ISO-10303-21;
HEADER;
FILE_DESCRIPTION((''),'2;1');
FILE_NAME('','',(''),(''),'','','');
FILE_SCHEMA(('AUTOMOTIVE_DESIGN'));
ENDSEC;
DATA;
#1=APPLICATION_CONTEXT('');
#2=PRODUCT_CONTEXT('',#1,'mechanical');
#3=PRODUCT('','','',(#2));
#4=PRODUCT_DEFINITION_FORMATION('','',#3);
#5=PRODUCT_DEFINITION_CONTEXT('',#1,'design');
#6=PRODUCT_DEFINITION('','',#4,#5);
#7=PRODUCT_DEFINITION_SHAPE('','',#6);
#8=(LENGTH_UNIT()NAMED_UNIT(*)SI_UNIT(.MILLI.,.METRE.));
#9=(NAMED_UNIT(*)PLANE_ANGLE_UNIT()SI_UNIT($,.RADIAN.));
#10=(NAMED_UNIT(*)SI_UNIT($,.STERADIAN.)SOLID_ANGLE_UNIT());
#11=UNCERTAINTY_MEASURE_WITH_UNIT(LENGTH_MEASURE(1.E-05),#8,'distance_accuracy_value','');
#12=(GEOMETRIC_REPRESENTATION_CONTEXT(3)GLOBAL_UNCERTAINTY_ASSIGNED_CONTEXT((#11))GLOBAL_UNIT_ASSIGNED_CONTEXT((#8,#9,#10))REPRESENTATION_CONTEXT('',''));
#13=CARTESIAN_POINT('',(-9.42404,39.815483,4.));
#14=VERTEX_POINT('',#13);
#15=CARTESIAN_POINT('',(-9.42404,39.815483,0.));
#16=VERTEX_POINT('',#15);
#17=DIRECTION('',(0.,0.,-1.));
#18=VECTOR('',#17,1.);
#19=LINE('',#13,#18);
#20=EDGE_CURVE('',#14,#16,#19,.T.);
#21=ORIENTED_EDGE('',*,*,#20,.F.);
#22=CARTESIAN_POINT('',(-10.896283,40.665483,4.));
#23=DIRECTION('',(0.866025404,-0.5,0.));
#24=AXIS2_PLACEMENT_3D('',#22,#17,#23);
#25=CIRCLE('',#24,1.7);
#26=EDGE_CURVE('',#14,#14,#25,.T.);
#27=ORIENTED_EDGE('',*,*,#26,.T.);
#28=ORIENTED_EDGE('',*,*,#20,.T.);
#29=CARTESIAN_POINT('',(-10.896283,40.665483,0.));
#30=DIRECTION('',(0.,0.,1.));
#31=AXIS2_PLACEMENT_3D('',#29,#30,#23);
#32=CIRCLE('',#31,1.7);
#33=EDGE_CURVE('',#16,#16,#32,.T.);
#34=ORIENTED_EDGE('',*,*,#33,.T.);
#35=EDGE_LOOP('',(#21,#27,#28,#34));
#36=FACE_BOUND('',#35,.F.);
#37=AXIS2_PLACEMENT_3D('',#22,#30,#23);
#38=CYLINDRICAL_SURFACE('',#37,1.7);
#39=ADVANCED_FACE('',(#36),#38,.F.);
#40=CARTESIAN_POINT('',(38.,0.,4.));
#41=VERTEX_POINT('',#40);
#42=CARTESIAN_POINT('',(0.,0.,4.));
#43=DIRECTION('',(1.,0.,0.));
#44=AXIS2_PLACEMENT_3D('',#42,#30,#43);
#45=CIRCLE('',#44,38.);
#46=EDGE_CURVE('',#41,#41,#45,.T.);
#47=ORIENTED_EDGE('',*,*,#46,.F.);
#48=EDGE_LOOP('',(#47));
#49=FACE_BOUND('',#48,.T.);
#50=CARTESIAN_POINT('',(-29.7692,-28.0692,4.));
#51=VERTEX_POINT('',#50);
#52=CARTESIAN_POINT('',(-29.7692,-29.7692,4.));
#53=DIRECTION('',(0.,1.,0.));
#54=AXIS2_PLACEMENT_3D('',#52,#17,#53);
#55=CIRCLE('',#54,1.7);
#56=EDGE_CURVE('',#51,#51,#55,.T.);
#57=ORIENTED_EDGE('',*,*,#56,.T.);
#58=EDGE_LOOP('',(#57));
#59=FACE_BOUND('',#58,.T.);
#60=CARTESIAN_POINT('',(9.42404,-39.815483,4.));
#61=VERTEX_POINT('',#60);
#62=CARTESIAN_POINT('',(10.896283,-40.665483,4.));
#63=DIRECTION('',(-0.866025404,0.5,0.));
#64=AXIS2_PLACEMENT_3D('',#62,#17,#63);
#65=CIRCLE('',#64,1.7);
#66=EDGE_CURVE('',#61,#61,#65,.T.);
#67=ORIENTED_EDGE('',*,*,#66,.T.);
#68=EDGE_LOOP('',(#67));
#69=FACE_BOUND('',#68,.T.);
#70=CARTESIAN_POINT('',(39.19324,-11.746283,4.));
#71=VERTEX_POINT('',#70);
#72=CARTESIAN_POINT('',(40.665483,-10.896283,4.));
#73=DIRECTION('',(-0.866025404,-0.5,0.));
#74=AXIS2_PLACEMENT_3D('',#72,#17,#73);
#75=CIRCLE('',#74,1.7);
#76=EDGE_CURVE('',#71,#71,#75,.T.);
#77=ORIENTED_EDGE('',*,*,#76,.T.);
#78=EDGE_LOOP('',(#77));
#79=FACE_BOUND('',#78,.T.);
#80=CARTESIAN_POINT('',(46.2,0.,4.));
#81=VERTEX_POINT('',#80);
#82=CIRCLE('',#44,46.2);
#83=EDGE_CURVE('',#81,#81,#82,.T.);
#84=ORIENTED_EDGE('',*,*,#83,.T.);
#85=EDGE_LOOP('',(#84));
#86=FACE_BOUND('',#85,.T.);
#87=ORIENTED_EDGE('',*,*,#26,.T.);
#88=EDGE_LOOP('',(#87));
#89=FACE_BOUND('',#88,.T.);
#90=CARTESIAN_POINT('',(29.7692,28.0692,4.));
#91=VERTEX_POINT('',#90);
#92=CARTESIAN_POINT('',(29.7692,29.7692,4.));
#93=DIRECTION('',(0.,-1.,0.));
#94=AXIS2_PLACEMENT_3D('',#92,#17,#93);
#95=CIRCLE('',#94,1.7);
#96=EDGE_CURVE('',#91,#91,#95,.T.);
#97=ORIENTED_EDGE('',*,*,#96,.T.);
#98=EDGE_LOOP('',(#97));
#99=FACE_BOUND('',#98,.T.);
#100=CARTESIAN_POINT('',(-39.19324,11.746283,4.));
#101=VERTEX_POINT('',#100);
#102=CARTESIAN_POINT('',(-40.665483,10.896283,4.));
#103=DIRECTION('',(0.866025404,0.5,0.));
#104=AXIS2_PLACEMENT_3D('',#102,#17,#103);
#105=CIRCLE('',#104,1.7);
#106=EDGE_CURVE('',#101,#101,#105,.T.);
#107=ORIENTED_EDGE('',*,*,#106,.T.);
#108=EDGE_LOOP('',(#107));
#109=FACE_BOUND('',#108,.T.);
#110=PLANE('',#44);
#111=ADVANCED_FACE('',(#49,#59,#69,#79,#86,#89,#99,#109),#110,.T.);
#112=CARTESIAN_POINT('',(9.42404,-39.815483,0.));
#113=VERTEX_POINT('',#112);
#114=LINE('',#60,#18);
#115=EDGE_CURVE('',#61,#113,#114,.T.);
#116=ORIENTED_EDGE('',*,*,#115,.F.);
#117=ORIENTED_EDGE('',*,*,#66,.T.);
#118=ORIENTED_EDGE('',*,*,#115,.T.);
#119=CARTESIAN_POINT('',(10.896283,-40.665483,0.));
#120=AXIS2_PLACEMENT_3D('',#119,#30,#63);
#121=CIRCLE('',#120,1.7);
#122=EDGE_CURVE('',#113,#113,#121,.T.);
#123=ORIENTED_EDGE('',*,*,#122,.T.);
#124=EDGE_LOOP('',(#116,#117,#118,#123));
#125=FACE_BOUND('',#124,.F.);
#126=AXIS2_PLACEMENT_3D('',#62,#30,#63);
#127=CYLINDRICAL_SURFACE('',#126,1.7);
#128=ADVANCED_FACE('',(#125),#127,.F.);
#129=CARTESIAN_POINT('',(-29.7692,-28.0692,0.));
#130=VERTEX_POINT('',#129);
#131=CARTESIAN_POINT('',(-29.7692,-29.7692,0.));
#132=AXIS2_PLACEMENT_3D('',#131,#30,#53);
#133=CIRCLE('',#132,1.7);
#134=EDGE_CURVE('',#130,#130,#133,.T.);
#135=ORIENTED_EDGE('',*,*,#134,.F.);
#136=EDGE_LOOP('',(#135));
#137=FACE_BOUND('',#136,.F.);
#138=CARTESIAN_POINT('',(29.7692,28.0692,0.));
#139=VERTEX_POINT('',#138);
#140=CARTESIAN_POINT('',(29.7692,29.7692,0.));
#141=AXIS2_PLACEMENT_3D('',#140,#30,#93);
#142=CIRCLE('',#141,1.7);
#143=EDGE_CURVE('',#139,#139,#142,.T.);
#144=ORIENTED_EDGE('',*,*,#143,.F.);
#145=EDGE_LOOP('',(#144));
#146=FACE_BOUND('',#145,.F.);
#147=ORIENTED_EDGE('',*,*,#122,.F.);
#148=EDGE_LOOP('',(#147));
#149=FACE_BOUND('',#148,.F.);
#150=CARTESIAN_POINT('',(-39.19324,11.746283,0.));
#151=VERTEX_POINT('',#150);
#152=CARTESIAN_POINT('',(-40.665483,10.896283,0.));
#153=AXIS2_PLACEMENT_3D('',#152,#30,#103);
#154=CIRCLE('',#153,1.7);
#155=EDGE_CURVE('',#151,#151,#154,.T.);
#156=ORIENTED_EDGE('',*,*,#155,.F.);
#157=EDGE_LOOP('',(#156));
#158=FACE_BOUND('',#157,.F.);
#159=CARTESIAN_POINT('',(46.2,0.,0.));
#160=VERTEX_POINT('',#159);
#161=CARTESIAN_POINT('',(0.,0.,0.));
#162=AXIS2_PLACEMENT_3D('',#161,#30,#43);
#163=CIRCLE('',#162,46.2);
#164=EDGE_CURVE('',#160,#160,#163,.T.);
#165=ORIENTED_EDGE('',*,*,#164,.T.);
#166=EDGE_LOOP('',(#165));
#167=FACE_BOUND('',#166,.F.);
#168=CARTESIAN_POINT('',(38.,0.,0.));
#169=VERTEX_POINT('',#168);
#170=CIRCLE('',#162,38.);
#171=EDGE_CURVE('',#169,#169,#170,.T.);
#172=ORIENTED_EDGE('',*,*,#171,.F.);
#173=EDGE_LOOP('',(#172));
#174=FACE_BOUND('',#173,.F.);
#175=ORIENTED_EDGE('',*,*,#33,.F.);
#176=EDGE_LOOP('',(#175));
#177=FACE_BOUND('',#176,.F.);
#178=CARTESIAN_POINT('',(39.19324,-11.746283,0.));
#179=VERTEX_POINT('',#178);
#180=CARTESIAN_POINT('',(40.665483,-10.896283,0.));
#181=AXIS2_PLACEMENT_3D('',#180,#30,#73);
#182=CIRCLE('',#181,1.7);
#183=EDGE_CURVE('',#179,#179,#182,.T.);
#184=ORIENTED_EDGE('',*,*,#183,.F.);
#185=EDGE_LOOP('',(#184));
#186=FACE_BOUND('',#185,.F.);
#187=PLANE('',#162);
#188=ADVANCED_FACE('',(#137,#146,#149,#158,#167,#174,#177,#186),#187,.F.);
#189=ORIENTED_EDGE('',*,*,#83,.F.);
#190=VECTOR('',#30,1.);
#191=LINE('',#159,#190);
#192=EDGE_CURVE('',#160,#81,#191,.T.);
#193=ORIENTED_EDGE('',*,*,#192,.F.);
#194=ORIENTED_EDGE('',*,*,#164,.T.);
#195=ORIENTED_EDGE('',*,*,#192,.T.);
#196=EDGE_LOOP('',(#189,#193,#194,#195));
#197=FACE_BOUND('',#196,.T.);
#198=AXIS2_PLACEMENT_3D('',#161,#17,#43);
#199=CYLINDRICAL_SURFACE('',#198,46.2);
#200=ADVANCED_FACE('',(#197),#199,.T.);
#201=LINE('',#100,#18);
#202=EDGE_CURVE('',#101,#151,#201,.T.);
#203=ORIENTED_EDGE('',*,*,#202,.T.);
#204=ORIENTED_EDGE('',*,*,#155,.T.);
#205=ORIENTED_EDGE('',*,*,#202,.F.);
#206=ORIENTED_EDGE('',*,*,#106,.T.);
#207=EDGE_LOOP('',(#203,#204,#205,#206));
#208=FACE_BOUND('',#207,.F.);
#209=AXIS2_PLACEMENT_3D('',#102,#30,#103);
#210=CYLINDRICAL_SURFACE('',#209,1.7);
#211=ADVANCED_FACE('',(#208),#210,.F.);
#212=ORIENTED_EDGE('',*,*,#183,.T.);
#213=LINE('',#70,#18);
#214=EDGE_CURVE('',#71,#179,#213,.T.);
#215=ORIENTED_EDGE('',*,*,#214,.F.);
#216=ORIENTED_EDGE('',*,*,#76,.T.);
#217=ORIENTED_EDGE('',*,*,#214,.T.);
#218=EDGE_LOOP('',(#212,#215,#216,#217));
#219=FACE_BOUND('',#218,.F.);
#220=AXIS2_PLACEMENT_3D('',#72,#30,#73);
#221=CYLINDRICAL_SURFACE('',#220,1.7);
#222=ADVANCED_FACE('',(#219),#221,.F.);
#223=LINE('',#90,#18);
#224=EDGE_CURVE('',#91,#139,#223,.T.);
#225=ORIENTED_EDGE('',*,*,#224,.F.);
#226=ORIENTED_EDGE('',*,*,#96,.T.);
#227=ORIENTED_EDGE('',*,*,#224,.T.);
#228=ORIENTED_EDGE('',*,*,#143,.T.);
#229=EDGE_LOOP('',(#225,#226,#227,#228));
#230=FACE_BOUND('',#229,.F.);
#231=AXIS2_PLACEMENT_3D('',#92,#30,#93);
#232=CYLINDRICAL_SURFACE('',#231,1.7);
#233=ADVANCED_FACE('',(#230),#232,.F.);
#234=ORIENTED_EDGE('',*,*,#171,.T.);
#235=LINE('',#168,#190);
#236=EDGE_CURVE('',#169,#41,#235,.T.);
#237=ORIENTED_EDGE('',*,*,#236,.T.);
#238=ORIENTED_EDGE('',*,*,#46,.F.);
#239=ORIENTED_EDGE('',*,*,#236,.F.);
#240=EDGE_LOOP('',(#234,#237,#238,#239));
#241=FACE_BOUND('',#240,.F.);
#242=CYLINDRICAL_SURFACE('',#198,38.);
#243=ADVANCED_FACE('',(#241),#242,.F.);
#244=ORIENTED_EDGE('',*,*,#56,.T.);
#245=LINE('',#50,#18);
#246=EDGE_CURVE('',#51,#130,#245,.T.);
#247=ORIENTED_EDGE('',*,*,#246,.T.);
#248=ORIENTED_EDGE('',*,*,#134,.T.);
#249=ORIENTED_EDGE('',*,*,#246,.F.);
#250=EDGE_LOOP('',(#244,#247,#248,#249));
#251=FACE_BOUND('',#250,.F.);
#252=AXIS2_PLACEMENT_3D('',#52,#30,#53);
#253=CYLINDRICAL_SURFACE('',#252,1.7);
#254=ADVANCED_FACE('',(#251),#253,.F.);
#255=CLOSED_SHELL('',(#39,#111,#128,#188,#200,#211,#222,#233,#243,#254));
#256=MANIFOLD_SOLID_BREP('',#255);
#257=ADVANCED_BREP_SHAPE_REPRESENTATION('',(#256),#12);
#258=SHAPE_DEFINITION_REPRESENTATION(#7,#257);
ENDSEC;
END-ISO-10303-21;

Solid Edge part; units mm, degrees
sketch "Sketch1" plane through (0, 0, 0) normal (0, 0, 1) x (1, 0, 0)
  circle A0 centre (0, 0) radius 38
  circle A1 centre (0, 0) radius 46.2
extrude "Protrusion1" add sketch "Sketch1" along normal blind 4
hole "Hole1" at (29.7692, 29.7692, 4) direction (0, 0, -1) diameter 3.4 end up to next
pattern_circular "Pattern1" count 6 over 360 about axis through (0, 0, 4) along (0, 0, -1) of "Hole1"
